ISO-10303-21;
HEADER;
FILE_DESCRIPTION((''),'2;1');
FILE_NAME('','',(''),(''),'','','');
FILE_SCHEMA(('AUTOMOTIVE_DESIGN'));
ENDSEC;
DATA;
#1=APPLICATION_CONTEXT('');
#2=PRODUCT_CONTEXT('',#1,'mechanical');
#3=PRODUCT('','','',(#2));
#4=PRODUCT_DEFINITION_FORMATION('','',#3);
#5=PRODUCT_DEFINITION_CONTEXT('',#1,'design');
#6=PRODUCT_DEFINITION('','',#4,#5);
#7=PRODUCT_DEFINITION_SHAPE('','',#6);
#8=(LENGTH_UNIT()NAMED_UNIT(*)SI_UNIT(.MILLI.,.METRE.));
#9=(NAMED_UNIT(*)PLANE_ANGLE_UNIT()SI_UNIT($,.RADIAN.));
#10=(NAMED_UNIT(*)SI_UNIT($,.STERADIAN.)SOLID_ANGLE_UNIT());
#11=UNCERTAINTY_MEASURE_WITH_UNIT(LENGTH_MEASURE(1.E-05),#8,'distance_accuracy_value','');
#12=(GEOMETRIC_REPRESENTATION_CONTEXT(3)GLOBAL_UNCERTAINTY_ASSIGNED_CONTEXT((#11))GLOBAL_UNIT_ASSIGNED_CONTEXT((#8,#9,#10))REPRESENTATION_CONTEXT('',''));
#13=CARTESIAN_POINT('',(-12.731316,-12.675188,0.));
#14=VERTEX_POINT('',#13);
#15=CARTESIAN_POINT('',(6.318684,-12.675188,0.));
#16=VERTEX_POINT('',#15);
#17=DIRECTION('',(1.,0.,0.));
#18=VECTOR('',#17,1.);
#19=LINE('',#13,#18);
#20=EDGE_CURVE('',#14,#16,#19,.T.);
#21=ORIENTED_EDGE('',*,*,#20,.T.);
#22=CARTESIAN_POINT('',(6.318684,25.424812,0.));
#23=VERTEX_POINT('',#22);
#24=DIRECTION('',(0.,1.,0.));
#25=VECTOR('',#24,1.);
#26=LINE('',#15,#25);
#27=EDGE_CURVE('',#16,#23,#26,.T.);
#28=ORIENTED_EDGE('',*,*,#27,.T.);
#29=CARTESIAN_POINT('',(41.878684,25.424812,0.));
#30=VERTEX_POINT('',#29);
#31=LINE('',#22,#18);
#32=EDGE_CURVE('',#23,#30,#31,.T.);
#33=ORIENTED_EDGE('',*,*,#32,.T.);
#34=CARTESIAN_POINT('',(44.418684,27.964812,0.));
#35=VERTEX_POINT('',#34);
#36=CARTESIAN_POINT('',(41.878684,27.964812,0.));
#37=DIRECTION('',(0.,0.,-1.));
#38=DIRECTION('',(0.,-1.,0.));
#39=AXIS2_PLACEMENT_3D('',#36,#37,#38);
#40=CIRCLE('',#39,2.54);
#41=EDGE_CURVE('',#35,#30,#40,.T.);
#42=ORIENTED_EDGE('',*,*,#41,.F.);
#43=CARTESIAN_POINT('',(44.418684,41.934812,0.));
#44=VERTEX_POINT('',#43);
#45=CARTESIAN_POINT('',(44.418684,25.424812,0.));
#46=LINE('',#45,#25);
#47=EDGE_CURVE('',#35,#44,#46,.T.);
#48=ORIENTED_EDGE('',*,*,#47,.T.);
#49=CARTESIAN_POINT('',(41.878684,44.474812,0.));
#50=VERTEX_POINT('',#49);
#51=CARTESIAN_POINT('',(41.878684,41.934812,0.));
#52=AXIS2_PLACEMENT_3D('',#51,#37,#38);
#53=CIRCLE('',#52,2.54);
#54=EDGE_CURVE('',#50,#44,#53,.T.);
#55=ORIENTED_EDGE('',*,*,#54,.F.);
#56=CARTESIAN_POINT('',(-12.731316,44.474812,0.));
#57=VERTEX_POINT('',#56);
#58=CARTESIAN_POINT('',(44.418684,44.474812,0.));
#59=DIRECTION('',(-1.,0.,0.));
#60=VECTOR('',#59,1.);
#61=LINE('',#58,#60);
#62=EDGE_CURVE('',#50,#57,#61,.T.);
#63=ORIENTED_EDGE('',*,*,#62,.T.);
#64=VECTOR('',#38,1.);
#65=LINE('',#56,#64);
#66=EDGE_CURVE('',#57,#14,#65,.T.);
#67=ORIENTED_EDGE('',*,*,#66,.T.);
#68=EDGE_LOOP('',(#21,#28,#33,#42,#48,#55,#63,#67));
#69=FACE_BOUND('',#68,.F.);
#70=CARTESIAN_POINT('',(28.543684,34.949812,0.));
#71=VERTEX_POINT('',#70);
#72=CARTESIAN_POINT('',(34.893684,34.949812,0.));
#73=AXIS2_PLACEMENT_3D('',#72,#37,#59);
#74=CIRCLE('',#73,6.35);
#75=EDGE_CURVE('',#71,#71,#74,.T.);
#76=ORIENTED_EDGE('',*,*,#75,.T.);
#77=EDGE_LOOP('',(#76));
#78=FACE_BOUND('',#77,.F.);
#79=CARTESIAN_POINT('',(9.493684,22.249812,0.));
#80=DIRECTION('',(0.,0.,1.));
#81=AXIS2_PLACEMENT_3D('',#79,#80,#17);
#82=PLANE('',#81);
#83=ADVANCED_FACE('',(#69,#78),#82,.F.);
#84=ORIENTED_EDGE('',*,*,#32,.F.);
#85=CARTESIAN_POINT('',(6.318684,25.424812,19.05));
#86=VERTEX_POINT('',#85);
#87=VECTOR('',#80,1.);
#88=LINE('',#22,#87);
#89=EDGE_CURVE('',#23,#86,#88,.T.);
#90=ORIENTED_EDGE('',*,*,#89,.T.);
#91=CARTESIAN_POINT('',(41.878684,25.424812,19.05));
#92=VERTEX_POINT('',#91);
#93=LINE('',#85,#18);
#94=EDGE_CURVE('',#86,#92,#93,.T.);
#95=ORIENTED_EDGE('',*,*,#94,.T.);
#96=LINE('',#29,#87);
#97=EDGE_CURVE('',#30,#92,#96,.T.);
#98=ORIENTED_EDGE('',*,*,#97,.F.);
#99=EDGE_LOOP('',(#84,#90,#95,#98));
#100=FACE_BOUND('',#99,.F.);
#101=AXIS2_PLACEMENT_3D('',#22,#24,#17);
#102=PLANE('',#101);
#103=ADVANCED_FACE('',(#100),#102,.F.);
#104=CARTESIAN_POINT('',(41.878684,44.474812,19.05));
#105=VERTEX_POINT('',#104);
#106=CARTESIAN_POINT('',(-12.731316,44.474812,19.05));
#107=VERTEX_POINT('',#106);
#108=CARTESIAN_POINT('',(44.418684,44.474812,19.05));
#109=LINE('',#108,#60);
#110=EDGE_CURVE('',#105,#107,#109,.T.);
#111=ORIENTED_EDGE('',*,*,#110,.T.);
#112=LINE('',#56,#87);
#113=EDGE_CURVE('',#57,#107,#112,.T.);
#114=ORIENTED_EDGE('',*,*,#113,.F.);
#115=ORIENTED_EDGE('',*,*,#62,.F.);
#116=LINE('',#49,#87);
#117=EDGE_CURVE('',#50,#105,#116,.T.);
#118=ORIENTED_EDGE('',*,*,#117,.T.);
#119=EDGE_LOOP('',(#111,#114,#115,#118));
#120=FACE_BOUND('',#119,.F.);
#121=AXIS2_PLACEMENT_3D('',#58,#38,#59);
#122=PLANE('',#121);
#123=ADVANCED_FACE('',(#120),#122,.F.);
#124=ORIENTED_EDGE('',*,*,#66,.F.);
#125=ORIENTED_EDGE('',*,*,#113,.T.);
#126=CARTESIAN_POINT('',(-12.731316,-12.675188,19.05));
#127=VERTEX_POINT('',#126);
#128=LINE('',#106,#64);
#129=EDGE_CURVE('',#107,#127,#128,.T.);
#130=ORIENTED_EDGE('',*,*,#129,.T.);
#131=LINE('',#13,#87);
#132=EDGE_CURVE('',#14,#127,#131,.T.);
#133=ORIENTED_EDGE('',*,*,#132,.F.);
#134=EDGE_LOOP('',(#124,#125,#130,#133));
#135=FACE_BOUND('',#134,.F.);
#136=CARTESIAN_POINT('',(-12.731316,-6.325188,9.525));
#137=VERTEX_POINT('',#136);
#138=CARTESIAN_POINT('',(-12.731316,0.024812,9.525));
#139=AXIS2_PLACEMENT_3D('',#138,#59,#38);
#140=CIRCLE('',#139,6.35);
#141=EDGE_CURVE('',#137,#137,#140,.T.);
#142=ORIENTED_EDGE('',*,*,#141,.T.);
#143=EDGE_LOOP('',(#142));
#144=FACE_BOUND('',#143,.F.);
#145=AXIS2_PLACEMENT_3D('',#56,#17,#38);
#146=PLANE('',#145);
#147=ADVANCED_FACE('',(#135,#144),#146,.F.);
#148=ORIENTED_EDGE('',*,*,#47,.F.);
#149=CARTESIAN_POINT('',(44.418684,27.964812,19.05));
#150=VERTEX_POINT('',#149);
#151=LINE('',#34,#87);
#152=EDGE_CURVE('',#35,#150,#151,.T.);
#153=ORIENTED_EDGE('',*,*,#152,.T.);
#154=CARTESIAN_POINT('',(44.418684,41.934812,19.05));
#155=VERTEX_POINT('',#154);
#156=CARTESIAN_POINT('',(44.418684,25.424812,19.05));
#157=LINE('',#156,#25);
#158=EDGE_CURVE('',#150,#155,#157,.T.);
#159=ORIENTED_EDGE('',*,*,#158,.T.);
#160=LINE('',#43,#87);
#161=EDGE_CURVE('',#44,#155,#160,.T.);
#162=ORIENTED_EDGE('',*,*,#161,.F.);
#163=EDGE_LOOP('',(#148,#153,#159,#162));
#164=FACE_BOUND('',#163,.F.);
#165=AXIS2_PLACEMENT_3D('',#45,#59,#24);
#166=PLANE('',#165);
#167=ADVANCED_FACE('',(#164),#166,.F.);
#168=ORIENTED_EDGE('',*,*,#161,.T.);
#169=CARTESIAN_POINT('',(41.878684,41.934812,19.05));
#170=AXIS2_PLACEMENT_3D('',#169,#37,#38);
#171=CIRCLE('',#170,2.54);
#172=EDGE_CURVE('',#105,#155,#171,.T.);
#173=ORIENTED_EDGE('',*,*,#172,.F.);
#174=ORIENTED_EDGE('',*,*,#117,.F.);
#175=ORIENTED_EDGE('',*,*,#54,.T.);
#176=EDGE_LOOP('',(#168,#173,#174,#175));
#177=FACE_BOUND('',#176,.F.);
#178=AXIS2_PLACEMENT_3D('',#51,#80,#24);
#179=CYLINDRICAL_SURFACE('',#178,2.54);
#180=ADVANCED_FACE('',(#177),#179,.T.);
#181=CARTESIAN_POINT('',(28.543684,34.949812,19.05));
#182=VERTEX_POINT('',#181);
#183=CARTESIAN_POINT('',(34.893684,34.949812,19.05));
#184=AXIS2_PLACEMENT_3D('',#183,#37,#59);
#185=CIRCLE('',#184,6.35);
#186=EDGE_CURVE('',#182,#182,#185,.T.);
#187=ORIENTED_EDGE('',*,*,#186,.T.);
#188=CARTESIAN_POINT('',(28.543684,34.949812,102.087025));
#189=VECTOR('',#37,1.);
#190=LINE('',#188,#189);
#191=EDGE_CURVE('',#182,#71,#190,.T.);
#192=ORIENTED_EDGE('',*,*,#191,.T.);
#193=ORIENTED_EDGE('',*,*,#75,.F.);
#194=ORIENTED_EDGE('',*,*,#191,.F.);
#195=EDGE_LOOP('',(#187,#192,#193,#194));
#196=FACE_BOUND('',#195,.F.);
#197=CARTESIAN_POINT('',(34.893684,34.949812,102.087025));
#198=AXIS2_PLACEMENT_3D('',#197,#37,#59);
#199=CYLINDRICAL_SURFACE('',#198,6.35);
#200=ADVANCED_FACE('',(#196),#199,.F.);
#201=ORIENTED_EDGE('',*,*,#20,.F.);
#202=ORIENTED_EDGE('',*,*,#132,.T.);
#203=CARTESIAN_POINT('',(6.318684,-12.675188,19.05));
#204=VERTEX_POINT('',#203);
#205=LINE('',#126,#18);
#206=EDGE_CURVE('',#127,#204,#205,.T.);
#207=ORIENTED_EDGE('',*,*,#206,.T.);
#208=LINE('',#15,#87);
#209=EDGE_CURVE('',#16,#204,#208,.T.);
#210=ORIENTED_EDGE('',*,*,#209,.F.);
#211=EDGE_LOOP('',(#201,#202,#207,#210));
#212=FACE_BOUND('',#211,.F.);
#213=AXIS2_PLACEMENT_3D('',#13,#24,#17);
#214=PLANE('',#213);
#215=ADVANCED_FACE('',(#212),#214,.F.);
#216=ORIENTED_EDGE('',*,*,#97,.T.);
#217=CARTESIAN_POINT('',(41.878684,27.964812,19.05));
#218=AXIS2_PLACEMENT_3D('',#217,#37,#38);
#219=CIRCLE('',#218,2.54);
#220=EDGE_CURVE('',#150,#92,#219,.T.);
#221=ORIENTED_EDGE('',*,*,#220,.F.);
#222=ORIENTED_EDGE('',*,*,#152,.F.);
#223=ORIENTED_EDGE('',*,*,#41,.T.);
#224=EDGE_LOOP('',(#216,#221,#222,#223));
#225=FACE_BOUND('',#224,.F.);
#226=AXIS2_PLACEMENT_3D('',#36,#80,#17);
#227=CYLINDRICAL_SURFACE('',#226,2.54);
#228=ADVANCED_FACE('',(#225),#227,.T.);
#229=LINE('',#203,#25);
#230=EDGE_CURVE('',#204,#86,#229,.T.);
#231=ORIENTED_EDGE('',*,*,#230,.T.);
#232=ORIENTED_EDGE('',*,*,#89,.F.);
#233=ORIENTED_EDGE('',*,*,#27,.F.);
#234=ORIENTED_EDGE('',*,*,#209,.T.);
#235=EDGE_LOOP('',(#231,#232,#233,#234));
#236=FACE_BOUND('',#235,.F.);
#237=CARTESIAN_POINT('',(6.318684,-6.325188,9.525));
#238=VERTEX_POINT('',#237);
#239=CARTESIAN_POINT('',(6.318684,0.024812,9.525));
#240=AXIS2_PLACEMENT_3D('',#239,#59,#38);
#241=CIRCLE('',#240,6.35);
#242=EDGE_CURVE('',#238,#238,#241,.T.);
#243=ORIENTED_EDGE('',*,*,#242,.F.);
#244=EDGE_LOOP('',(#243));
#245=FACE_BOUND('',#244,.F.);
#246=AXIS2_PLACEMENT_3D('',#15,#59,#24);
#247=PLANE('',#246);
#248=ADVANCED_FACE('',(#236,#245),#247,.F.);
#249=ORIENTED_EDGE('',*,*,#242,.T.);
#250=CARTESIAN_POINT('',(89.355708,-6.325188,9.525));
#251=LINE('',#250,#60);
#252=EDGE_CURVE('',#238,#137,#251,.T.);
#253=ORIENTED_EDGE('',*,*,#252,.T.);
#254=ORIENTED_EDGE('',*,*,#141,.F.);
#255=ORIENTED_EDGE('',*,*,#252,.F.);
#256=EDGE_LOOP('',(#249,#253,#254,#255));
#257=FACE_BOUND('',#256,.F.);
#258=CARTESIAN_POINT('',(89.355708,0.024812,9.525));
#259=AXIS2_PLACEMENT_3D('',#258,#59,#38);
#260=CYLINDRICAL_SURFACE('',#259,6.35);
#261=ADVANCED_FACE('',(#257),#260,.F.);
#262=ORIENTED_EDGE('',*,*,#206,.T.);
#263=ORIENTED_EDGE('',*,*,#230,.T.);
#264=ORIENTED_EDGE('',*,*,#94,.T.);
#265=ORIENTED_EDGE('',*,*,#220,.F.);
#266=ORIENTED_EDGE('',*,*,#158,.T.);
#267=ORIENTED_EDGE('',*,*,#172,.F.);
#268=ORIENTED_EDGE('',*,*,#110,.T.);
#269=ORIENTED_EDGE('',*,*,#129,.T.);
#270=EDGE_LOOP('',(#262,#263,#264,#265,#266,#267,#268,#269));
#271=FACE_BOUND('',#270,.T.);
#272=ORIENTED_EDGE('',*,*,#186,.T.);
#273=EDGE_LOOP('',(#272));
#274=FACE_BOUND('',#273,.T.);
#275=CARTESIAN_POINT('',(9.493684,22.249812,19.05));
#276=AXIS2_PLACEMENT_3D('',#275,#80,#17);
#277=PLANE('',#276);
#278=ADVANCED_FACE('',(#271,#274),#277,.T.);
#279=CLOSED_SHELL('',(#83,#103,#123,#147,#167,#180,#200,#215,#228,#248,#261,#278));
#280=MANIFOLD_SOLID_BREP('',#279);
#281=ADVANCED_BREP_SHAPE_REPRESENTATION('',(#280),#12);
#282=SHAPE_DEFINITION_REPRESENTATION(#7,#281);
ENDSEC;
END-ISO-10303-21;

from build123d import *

# Parameters (mm, degrees)
F1_DEPTH = 19.05
F3_D     = 12.7
F4_R     = 2.54
F6_D     = 12.7


# Not quite as in the source:
# - a feature names something its author has since deleted; it is built from what else it names


with BuildPart() as f1:
    # F0 (on Top) → F1 (new body)
    with BuildSketch(Plane.XY):
        Polygon((-12.7313164792, 44.4748119943), (-12.7313164792, -12.6751880057), (6.3186835208, -12.6751880057), (6.3186835208, 25.4248119943), (44.4186835208, 25.4248119943), (44.4186835208, 44.4748119943), align=None)
    extrude(amount=F1_DEPTH)

    # F3 (through all)
    with Locations(Plane.XY.offset(19.05)):
        with Locations((34.8936835208, 34.9498119943)):
            Hole(F3_D / 2)

    # F4
    f4_edges = [f1.edges().sort_by_distance(p)[0] for p in [
        (44.418684, 25.424812, 9.525),
        (44.418684, 44.474812, 9.525),
    ]]
    fillet(f4_edges, radius=F4_R)

    # F6 (through all)
    with Locations(Plane.YZ.offset(6.3186835208)):
        with Locations((0.0248119943, 9.525)):
            Hole(F6_D / 2)


solid = f1.part
